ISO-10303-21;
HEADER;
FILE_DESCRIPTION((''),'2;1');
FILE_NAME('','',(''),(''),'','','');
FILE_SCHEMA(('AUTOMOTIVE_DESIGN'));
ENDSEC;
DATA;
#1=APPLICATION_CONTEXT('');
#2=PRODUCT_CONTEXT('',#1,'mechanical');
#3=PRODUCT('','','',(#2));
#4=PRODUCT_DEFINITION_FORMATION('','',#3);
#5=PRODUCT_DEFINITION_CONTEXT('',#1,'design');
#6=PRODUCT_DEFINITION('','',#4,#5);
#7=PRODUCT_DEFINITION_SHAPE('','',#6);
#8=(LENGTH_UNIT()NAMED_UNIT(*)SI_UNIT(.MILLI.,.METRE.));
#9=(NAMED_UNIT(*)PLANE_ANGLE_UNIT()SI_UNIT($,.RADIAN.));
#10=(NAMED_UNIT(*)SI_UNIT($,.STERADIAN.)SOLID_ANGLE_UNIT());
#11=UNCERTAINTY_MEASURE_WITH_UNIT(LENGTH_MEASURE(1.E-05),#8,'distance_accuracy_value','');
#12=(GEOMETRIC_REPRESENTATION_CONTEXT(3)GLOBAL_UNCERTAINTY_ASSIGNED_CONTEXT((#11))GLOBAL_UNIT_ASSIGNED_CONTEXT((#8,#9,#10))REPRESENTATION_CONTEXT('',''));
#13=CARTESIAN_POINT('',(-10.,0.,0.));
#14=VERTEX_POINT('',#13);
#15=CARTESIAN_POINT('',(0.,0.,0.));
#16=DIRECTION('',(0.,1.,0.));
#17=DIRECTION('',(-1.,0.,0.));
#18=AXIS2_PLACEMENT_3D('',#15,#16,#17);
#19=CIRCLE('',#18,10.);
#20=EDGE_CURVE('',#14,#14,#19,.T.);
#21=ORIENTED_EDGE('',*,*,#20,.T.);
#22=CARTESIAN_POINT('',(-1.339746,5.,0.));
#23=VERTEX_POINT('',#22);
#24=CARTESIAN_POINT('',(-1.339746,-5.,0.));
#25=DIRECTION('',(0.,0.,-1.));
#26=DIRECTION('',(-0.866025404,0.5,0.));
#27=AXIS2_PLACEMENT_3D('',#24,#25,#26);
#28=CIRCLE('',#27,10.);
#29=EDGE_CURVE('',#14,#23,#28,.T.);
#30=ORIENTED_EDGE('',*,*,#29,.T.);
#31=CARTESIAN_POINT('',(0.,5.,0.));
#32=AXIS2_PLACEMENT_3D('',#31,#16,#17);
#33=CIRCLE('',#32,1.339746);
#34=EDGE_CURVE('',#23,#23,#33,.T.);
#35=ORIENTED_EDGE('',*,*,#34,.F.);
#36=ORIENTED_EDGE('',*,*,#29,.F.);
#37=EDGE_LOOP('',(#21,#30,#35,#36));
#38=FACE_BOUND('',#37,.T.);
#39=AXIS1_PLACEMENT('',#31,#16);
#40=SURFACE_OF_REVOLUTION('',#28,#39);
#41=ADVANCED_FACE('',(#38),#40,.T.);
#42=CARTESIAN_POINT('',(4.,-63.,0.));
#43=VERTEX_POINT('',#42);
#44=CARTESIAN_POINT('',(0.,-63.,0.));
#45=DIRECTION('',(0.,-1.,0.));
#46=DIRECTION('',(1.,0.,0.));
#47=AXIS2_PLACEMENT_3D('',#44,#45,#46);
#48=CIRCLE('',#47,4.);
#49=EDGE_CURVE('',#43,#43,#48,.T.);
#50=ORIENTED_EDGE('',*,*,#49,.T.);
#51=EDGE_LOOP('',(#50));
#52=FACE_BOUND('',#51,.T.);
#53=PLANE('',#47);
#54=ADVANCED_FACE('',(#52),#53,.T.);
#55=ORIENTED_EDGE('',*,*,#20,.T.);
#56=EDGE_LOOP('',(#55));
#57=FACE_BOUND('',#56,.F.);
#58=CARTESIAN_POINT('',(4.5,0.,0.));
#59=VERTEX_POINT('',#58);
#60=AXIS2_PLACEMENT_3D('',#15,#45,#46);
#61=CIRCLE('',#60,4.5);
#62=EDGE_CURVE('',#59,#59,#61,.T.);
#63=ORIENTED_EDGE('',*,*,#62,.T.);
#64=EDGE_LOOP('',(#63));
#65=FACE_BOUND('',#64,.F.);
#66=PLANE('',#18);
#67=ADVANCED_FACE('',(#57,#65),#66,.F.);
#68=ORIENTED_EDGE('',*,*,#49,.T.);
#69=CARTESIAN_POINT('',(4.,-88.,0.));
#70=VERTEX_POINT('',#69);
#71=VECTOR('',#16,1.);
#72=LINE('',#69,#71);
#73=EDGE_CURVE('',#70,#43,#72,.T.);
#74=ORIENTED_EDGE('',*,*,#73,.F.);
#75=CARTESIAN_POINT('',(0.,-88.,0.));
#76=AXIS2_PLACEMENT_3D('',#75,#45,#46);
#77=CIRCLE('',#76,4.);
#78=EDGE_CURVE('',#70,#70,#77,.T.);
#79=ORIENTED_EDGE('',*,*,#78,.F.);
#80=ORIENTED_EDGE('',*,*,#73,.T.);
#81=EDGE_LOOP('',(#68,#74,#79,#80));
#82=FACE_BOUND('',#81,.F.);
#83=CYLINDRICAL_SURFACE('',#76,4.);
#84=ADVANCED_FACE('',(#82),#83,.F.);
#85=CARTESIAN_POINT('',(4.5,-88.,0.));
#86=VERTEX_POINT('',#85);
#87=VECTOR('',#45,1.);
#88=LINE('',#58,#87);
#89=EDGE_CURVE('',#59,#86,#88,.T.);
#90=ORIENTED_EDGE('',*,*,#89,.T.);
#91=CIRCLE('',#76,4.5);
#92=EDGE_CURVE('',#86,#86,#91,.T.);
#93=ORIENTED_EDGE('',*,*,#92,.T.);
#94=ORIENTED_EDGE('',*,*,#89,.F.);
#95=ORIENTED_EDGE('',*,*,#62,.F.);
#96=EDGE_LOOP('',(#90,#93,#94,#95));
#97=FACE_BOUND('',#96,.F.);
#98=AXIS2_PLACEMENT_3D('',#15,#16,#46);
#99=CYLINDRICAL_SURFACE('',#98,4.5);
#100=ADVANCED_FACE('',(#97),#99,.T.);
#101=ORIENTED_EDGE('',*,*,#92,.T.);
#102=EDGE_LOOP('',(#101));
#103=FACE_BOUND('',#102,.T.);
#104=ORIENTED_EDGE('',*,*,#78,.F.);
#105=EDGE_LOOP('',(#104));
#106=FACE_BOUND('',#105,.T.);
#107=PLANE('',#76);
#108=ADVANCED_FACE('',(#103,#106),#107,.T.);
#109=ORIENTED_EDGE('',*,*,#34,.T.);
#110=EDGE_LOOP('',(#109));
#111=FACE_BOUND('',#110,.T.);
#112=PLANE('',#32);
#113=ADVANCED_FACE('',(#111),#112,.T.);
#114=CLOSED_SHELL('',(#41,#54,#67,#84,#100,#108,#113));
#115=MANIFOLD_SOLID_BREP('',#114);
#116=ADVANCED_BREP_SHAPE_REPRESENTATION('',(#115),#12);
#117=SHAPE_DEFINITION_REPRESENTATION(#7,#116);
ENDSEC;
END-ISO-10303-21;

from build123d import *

# Parameters (mm, degrees)
F0_R     = 4.5
F1_DEPTH = 88
F2_R     = 4
F3_DEPTH = 25
F4_R     = 10
F4_R_2   = 4.5
F5_DEPTH = 5


# Not quite as in the source:
# - a fillet or chamfer that OpenCascade refuses, or shapes differently, is made with other operations: its cross-section is extruded or revolved along the edge and cut away or added


with BuildPart() as f1:
    # F0 (on Front) → F1 (new body)
    with BuildSketch(Plane.XZ):
        Circle(F0_R)
    extrude(amount=F1_DEPTH)

    # F2 (on face) → F3 (cut)
    with BuildSketch(Plane.XZ.offset(88)):
        Circle(F2_R)
    extrude(amount=-F3_DEPTH, mode=Mode.SUBTRACT)

    # F4 (on face) → F5 (join)
    with BuildSketch(Plane(origin=(0, 0, 0), x_dir=(-1, 0, 0), z_dir=(0, 1, 0))):
        Circle(F4_R)
        Circle(F4_R_2, mode=Mode.SUBTRACT)
        Circle(F4_R_2)
    extrude(amount=F5_DEPTH)

    # F6: fillet of radius 10 on 1 edges, made by hand

    # F6_s1 → F6_t2 (revolve, cut)
    with BuildSketch(Plane.XY):
        with BuildLine():
            ThreePointArc((-10, 0), (-6.3397459622, 3.6602540378), (-1.3397459622, 5))
            Line((-1.3397459622, 5), (-10, 5))
            Line((-10, 5), (-10, 0))
        make_face()
    revolve(axis=Axis((0, 5, 0), (0, 1, 0)), mode=Mode.SUBTRACT)


solid = f1.part
